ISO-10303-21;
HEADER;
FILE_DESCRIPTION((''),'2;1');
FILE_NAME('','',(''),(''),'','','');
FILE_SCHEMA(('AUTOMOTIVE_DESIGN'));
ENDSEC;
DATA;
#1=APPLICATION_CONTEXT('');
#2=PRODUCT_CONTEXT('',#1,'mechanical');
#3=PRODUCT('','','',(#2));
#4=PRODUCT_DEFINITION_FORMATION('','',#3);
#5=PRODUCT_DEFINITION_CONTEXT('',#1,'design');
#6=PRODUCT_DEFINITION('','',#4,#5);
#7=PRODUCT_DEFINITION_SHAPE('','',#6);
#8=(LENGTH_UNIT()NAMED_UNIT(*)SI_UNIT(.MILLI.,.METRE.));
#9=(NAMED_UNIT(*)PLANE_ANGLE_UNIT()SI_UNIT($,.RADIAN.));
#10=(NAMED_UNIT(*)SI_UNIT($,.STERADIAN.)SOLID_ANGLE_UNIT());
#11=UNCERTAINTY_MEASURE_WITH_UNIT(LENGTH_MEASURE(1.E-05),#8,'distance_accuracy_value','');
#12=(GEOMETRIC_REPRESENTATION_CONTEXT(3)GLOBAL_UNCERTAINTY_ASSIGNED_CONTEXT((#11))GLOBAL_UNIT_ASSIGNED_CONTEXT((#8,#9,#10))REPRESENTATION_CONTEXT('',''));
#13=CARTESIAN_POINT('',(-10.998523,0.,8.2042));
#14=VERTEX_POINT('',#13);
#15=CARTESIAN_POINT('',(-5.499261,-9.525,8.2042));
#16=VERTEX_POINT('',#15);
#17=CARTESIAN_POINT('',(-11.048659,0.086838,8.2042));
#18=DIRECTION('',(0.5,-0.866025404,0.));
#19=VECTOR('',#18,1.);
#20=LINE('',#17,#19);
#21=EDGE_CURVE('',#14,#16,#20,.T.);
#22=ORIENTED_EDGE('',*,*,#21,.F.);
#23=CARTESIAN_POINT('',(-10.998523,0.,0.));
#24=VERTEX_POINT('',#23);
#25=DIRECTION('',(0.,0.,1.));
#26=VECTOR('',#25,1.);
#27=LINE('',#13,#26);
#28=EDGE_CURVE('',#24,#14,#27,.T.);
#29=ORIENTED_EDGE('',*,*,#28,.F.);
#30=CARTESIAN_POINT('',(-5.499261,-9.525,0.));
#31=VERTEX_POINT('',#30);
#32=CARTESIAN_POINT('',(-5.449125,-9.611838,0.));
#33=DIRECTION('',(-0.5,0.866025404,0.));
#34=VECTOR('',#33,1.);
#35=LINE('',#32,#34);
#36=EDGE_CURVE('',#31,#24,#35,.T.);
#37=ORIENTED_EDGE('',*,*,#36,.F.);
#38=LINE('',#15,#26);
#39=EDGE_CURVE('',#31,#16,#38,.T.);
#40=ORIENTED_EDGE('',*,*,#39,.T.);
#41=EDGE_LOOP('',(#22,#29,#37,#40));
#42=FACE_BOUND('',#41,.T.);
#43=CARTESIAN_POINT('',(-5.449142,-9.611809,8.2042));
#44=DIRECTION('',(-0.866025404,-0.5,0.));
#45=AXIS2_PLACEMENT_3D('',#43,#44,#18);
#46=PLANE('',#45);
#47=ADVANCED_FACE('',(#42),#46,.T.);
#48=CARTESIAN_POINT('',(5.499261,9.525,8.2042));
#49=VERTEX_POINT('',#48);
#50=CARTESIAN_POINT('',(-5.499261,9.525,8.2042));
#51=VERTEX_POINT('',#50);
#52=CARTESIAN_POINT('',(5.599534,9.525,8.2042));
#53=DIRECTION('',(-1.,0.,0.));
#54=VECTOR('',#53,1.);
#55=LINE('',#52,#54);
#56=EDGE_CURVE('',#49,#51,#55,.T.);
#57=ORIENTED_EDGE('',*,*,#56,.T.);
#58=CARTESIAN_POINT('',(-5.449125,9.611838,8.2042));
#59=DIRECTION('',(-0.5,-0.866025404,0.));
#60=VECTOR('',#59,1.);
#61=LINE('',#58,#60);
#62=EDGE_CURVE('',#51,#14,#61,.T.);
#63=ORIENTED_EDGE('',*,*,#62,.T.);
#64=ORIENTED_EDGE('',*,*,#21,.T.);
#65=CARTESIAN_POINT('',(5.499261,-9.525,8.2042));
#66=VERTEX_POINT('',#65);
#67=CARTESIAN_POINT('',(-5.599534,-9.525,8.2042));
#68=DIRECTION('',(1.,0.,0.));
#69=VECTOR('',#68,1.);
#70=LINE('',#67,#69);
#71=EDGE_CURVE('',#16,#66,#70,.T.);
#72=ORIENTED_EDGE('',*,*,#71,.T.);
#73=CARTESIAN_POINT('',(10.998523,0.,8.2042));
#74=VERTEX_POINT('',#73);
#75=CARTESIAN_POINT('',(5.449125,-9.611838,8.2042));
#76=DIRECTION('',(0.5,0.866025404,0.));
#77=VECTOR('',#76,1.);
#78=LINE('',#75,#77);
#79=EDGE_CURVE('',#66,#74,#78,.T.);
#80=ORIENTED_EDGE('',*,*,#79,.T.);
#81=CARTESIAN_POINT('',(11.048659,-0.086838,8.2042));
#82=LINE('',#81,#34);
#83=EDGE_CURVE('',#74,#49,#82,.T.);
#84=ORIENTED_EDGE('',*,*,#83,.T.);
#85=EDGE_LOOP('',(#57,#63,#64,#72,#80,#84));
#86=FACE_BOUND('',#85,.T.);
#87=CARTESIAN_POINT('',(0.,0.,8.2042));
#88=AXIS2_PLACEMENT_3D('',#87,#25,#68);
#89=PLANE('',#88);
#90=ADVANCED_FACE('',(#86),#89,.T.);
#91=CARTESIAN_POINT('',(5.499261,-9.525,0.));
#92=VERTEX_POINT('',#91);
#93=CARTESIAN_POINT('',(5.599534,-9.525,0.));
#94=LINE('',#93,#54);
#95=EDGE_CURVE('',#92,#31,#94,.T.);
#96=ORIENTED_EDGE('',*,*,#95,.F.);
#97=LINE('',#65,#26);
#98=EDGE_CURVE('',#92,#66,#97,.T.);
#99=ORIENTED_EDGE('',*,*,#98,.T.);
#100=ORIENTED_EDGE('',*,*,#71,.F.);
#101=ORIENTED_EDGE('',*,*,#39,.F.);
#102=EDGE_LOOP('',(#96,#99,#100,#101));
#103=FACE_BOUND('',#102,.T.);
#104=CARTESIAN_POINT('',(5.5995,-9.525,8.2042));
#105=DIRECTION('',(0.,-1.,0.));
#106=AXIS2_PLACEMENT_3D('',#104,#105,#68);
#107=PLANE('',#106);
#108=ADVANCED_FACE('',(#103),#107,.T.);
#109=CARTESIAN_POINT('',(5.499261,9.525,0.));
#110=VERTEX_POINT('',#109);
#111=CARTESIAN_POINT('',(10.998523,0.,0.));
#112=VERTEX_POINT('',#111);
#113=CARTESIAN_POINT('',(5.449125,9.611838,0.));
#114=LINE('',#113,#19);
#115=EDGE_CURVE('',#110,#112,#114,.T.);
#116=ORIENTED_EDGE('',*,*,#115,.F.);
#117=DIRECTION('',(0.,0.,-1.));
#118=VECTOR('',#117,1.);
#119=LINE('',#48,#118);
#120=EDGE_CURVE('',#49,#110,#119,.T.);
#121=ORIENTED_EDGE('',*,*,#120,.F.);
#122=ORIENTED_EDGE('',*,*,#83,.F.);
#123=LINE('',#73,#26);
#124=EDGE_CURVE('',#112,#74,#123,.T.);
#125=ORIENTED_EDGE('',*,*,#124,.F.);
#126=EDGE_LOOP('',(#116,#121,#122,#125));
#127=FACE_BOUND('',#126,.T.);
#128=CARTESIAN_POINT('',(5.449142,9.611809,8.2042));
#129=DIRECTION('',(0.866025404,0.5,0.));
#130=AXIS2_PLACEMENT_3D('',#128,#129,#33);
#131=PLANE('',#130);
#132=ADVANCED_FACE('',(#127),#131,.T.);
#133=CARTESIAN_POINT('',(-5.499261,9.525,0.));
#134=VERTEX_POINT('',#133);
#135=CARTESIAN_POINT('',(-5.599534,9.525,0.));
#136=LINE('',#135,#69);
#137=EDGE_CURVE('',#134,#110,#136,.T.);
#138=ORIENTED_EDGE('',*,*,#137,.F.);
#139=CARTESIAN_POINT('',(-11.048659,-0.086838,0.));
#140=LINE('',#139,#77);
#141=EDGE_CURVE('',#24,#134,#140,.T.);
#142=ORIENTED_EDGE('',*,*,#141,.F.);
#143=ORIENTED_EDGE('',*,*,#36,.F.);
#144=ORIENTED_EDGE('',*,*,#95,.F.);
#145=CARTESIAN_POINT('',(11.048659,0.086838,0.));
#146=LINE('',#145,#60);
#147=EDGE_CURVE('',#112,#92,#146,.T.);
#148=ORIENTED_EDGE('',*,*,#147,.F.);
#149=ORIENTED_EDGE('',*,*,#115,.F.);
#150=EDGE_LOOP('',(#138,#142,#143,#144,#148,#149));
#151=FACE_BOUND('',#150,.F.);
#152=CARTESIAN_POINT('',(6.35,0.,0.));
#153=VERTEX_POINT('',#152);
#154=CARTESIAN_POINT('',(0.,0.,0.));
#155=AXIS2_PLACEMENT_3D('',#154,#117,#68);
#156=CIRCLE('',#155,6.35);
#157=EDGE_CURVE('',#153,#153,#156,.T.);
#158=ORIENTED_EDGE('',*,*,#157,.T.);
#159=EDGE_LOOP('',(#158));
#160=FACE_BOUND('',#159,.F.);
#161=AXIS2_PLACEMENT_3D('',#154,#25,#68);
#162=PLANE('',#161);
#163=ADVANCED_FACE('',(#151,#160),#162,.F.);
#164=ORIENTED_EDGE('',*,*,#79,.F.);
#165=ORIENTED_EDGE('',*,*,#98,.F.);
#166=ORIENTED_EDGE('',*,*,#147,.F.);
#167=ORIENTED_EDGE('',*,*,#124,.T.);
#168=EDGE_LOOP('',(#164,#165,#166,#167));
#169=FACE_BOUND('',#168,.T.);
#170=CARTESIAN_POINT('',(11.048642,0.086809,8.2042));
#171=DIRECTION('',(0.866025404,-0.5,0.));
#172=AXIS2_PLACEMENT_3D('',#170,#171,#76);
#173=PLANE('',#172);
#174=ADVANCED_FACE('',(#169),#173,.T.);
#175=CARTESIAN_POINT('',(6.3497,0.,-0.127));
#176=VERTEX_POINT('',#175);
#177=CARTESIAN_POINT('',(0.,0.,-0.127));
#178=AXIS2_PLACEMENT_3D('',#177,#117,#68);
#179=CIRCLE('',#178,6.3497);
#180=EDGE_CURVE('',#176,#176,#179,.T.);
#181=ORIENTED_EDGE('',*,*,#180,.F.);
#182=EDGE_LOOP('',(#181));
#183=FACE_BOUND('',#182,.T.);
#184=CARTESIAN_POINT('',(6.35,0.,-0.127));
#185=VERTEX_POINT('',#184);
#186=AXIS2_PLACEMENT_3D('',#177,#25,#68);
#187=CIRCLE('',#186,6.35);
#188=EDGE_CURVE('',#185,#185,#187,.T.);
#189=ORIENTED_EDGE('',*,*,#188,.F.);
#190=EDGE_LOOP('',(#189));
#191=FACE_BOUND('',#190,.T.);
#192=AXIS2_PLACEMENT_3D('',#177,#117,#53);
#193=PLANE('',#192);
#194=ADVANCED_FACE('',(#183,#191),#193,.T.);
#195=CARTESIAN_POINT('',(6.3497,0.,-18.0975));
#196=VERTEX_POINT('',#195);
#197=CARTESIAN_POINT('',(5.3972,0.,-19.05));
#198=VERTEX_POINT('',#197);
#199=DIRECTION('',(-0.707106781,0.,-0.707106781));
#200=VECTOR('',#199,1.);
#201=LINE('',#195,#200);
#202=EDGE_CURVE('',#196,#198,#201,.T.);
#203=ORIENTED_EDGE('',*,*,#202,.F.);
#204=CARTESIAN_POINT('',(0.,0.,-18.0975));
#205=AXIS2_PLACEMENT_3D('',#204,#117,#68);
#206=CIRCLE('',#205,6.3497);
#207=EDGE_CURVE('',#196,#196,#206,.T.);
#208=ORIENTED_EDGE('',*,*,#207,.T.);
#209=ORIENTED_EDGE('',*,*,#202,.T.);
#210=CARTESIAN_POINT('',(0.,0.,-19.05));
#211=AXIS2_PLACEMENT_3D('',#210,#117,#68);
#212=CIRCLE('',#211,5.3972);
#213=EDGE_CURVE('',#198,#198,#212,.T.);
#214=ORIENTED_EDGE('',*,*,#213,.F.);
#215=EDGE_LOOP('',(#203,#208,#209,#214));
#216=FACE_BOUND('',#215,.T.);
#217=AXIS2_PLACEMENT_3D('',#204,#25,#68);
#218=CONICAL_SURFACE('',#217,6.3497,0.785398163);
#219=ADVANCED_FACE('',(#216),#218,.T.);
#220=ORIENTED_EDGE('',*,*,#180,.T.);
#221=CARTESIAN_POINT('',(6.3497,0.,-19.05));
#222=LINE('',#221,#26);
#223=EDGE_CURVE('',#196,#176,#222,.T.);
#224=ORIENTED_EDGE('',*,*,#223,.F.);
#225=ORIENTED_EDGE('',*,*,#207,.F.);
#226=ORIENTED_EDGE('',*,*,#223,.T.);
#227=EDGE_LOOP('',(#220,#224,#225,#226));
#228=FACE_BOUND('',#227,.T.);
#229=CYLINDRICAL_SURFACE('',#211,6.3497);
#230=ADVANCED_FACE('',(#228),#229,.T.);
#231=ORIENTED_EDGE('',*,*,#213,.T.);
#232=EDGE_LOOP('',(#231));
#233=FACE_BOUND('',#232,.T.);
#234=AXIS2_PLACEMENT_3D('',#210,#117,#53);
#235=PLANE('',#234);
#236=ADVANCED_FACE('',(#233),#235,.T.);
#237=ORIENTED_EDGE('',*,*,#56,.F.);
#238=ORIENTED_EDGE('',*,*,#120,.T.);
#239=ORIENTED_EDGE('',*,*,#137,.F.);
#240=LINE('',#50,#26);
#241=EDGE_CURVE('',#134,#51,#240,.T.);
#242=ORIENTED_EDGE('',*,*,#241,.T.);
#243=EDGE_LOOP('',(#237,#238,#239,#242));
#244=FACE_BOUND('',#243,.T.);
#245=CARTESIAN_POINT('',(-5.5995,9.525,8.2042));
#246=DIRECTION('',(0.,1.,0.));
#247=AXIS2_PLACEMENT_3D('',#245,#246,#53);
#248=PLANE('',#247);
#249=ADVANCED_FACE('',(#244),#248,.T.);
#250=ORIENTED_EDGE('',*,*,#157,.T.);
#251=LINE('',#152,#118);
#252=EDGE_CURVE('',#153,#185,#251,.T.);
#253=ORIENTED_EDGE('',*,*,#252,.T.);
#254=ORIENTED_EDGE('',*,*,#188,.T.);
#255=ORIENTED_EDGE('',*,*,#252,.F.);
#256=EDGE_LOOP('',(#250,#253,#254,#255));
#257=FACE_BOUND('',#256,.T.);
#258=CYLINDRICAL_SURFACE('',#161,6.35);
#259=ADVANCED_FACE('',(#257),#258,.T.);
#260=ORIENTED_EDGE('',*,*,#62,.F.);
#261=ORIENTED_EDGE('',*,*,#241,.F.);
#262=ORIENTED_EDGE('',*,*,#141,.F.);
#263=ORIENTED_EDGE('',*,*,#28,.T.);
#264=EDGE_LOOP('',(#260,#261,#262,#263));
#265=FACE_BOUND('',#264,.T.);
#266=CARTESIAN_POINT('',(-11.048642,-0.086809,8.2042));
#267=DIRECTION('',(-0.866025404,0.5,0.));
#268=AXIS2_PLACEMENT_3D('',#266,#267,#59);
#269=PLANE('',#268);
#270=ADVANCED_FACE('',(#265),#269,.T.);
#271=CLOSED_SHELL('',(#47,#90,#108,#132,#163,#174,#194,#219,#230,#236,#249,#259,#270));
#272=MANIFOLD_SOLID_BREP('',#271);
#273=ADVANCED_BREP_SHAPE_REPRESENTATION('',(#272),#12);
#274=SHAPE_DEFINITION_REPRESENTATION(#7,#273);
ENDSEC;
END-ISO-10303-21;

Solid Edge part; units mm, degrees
sketch "Sketch1" plane through (0, 0, 0) normal (0, 0, 1) x (1, 0, 0)
  circle A0 centre (0, 0) radius 11.049
  dimension "D1" = 22.098
extrude "Protrusion1" add sketch "Sketch1" along normal blind 8.2042
sketch "Sketch2" plane through (0, 0, 0) normal (0, 0, -1) x (1, 0, 0)
  circle A0 centre (0, 0) radius 6.35
extrude "Protrusion2" add sketch "Sketch2" along normal blind 19.05
sketch "Sketch3" plane through (0, 0, -19.05) normal (0, 0, -1) x (1, 0, 0)
  circle A0 centre (0, 0) radius 6.3497
extrude "Cutout1" cut sketch "Sketch3" against normal blind 18.923 flip side to cut
chamfer "Chamfer_1" distance 0.9525 angle 45 1 edges at (-6.3497, 0, -19.05)
sketch "Sketch4" plane through (0, 0, 8.2042) normal (0, 0, 1) x (1, 0, 0)
  line L0 (-5.5995, 9.525) -> (5.5995, 9.525)
  dimension "D1" = 19.05
extrude "Cutout2" cut sketch "Sketch4" against normal up to next material side at (0, 9.575, 8.2042)
pattern_circular "Pattern1" count 6 over 360 about axis through (0, 0, 8.2042) along (0, 0, 1) of "Cutout2"
properties part number "117654"
